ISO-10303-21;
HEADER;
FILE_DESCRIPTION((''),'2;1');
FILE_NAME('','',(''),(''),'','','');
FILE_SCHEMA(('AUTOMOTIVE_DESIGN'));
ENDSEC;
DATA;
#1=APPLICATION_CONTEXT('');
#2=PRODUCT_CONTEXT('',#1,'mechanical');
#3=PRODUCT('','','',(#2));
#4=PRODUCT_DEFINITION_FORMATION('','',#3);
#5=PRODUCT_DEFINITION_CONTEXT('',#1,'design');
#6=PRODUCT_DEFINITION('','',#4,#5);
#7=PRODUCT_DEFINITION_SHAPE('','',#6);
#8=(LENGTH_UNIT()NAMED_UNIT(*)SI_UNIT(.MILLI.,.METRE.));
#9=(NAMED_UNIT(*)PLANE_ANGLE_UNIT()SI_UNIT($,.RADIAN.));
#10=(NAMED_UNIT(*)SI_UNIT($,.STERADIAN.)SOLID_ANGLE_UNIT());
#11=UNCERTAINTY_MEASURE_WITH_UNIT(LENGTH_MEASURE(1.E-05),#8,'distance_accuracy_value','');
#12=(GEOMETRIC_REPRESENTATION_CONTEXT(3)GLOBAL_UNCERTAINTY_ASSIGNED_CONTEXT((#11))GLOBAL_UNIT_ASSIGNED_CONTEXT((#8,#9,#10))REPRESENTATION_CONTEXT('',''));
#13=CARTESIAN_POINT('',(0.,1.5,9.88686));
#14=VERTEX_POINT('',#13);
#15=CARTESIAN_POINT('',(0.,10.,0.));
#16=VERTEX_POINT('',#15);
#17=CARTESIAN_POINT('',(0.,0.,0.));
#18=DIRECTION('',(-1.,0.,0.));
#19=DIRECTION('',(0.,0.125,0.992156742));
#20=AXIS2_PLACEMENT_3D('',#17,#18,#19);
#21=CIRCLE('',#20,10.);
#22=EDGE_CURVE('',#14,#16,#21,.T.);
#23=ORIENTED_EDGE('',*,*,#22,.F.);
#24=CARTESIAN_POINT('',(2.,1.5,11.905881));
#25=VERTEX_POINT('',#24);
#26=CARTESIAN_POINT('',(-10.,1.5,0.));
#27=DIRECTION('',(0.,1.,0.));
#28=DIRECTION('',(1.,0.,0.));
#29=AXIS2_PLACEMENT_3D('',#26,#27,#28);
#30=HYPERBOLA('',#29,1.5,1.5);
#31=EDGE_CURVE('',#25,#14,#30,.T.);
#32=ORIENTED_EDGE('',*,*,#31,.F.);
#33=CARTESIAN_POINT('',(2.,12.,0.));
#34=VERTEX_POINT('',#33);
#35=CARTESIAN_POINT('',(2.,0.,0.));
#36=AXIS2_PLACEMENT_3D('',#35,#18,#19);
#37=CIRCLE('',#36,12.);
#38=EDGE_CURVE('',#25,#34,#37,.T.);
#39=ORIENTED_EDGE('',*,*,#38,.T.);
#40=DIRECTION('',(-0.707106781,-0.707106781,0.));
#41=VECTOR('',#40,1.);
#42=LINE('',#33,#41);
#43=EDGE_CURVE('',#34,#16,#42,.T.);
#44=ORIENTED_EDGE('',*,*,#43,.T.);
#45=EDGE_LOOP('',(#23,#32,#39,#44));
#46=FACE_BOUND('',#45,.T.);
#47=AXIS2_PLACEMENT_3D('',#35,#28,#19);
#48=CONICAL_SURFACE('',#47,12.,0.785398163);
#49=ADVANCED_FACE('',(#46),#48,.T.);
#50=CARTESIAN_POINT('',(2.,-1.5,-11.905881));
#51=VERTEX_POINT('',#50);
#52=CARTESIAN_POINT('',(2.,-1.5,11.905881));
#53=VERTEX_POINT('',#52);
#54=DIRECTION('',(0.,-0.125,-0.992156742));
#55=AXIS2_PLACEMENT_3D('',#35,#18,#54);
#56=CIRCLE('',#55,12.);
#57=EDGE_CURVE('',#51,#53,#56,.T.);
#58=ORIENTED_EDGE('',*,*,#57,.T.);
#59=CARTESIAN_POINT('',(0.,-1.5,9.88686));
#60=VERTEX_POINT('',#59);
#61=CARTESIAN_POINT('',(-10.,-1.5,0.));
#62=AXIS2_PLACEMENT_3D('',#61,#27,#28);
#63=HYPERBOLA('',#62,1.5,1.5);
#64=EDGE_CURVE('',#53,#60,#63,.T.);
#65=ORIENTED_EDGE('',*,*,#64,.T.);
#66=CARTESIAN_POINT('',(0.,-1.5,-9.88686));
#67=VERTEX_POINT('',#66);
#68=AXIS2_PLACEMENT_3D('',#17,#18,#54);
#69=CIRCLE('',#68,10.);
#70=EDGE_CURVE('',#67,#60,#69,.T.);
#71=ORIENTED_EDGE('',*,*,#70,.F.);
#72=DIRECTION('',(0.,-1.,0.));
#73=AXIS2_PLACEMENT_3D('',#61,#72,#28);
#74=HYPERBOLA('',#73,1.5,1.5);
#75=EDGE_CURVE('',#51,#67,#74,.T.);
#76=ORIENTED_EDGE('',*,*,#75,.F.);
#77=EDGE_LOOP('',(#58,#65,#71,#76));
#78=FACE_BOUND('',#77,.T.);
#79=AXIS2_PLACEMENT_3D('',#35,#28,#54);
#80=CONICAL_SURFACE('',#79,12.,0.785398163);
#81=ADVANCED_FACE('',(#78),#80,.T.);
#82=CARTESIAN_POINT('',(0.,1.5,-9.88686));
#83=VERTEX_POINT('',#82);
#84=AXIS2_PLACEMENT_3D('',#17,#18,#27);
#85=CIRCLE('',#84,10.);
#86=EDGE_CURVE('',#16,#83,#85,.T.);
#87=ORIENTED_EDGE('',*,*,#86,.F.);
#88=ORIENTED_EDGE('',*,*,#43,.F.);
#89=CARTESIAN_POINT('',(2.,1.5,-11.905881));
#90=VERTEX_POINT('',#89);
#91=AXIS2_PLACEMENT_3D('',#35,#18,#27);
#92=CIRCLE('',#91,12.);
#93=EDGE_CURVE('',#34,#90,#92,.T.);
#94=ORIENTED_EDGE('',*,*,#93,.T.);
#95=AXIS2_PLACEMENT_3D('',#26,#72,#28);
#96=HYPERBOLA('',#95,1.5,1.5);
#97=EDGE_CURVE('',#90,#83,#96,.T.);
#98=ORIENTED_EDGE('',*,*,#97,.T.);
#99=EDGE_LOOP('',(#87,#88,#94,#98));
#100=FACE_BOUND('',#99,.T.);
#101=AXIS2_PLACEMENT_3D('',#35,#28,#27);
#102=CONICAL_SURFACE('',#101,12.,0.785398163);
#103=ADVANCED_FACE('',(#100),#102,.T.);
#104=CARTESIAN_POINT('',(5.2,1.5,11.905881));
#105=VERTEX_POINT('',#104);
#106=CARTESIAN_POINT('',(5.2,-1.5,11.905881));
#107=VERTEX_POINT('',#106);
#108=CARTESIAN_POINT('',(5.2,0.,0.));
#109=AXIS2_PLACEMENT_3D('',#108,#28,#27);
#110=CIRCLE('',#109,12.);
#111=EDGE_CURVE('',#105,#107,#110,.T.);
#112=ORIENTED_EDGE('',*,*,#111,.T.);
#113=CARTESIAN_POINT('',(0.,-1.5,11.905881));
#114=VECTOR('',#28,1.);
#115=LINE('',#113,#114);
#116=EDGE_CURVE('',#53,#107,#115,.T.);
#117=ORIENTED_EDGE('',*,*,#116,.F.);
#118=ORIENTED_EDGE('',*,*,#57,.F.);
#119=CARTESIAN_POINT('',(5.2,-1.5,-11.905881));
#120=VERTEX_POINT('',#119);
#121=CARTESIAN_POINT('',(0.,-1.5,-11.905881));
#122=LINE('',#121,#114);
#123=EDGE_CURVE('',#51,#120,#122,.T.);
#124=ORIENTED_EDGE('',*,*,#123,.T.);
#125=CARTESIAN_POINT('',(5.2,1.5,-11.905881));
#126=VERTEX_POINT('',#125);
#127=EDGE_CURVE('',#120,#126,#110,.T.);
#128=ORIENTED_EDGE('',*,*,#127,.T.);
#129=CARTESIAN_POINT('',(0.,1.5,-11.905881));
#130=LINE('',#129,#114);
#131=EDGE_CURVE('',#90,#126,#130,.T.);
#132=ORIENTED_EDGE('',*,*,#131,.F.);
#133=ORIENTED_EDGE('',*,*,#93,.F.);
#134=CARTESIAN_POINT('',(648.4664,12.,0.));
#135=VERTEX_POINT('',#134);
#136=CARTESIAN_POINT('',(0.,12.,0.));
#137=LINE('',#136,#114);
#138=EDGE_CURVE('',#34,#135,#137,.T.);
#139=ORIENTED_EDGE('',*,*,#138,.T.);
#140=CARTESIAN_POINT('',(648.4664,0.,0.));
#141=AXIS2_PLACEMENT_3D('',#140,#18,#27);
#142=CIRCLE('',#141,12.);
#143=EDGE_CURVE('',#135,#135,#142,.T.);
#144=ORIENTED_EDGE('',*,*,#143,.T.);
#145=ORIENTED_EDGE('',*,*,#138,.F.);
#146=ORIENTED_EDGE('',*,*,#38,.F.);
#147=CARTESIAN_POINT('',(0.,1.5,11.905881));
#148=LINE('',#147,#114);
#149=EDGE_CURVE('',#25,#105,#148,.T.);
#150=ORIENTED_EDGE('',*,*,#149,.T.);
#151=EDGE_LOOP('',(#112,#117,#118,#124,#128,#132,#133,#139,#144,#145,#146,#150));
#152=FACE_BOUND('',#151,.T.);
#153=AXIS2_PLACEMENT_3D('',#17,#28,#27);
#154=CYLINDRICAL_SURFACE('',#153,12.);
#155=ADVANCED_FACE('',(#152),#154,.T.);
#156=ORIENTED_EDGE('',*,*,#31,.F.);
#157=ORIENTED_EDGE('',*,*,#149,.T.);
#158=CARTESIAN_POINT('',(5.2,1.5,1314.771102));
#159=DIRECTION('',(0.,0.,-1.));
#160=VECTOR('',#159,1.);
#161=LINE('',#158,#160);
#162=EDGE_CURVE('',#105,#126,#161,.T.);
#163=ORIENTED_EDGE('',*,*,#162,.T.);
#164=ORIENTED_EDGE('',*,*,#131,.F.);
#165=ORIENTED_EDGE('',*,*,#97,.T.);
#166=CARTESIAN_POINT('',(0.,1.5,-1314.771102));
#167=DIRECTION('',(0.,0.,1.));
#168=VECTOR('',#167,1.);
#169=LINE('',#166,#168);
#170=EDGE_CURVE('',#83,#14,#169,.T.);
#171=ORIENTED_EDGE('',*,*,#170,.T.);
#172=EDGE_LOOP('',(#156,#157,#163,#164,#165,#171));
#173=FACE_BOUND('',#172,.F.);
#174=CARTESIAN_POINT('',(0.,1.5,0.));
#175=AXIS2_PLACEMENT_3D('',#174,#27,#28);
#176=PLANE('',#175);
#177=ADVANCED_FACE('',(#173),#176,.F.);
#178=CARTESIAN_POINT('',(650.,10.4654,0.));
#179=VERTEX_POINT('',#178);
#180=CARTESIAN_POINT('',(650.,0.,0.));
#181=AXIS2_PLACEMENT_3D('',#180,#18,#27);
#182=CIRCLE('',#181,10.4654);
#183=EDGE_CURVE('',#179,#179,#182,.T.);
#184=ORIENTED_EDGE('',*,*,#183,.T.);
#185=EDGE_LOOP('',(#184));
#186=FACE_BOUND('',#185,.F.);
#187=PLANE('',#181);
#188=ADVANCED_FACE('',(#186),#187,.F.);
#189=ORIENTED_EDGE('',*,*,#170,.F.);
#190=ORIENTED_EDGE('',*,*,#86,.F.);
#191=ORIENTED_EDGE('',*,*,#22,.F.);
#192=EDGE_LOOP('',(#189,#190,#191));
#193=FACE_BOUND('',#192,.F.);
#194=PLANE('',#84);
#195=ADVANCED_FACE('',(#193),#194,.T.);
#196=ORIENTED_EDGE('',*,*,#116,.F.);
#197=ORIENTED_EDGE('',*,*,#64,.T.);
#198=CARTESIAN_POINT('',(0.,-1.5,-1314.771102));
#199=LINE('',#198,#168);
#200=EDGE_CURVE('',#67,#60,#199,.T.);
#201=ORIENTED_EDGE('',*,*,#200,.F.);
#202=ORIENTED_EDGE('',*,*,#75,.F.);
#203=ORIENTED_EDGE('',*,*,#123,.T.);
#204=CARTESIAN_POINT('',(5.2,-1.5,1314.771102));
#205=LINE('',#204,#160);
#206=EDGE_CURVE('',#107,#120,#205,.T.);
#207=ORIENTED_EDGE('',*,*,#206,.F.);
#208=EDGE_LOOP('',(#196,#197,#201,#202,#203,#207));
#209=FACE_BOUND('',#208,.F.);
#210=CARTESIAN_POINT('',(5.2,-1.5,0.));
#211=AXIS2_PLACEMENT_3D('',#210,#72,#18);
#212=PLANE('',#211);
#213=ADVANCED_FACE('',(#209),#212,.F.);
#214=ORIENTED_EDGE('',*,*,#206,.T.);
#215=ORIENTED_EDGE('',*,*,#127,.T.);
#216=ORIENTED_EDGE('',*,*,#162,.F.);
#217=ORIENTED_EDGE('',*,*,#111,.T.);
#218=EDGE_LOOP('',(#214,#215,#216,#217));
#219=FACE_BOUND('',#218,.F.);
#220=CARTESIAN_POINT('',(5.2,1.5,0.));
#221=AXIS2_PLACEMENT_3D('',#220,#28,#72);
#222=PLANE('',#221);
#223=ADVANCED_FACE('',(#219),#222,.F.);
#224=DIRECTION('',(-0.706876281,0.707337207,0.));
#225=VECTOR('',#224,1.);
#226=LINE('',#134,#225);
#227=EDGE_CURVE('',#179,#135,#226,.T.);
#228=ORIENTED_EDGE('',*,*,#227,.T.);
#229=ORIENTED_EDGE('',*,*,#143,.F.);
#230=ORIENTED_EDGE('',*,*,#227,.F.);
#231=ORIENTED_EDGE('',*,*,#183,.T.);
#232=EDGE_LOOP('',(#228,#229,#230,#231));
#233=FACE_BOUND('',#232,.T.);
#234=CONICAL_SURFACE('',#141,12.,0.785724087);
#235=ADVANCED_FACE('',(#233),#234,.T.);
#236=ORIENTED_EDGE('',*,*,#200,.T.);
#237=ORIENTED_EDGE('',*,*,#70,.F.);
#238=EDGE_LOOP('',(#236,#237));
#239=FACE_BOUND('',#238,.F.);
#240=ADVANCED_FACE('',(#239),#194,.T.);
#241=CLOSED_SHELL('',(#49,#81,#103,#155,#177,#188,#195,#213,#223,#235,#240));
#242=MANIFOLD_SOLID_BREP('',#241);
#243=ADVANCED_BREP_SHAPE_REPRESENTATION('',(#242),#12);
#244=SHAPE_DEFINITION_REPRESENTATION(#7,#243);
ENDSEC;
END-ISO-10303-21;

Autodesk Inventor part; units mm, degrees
ref_plane "YZ Plane" through (0, 0, 0) normal (1, 0, 0) x (0, 1, 0)
sketch "Sketch1" plane through (0, 0, 0) normal (0, 0, 1) x (1, 0, 0)
  line L0 (0, 0) -> (0, 12)
  line L1 (0, 12) -> (650, 12)
  line L2 (650, 12) -> (650, 0)
  line L3 (650, 0) -> (0, 0)
  line L4 (0, 14.4) -> (0, -2.4) projected
  line L5 (-130, 0) -> (780, 0) projected
  dimension "d0" = 24
  dimension "d1" = 650
revolve "Body" add sketch "Sketch1" angle 360 about axis through (650, 0, 0) along (-1, 0, 0)
chamfer "Chamfer1" distance 1.5346 distance2 1.5336 1 edges at (650, -12, 0) measured on face at (650, -0.5646, -3.2919)
sketch "Sketch2" plane through (0, 0, 0) normal (0, 0, 1) x (1, 0, 0)
  line L0 (0, 1.5) -> (5.2, 1.5)
  line L1 (5.2, 1.5) -> (5.2, -1.5)
  line L2 (5.2, -1.5) -> (0, -1.5)
  line L3 (0, -12) -> (0, 12) projected
  line L4 (-1.04, 0) -> (6.24, 0) projected
  dimension "d7" = 1.5
  dimension "d8" = 5.2
extrude "Slot" cut sketch "Sketch2" along normal through all both and the other way through all
chamfer "Chamfer2" distance 2 angle 45 2 edges at (0, 9, 7.9373) (0, 9, -7.9373) measured on face at (0, 4.5446, 1.8536)
chamfer "Chamfer3" distance 2 angle 45 1 edges at (0, -12, 0) measured on face at (0, -7.3845, 2.2772)
ref_plane "IDS_WORKPLANE" through (626.4664, 0, 0) normal (1, 0, 0) x (0, 0, -1)
ref_plane "Work Plane2" through (325, 0, 0) normal (0, 0, -1) x (1, 0, 0)
thread "Thread2" size "M24x3" class "6g" standard "ANSI Metric M Profile" length 350
equation "\"d7\" = 0.5 * SBR"
equation "\"d8\" = STI"
equation "\"d6\" = -0.5 * GD1 + 0.5 * NND"
equation "\"d11\" = 0.1 * NND"
equation "\"d20\" = 0.1 * NND"
equation "\"d13\" = 0.1 * NND"
equation "\"d21\" = 0.1 * NND"
equation "\"GEL\" = 22"
equation "\"SBR\" = 3"
equation "\"STI\" = 5.2"
equation "\"GD1\" = THREADDIA - 1.2269 * PTC"
equation "\"GAL\" = 0.61345 * PTC"
equation "\"GUL\" = 0.61345 * PTC"
equation "\"d16\" = -GAL - GEL"
equation "\"d17\" = -GAL - GEL"
equation "\"TOA\" = 30deg"
equation "\"PTC\" = 2.5"
equation "\"NND\" = 20"
equation "\"THREADDIA\" = 20"
properties part number "DIN 427 - M20 x 60" material "Steel, Mild"
